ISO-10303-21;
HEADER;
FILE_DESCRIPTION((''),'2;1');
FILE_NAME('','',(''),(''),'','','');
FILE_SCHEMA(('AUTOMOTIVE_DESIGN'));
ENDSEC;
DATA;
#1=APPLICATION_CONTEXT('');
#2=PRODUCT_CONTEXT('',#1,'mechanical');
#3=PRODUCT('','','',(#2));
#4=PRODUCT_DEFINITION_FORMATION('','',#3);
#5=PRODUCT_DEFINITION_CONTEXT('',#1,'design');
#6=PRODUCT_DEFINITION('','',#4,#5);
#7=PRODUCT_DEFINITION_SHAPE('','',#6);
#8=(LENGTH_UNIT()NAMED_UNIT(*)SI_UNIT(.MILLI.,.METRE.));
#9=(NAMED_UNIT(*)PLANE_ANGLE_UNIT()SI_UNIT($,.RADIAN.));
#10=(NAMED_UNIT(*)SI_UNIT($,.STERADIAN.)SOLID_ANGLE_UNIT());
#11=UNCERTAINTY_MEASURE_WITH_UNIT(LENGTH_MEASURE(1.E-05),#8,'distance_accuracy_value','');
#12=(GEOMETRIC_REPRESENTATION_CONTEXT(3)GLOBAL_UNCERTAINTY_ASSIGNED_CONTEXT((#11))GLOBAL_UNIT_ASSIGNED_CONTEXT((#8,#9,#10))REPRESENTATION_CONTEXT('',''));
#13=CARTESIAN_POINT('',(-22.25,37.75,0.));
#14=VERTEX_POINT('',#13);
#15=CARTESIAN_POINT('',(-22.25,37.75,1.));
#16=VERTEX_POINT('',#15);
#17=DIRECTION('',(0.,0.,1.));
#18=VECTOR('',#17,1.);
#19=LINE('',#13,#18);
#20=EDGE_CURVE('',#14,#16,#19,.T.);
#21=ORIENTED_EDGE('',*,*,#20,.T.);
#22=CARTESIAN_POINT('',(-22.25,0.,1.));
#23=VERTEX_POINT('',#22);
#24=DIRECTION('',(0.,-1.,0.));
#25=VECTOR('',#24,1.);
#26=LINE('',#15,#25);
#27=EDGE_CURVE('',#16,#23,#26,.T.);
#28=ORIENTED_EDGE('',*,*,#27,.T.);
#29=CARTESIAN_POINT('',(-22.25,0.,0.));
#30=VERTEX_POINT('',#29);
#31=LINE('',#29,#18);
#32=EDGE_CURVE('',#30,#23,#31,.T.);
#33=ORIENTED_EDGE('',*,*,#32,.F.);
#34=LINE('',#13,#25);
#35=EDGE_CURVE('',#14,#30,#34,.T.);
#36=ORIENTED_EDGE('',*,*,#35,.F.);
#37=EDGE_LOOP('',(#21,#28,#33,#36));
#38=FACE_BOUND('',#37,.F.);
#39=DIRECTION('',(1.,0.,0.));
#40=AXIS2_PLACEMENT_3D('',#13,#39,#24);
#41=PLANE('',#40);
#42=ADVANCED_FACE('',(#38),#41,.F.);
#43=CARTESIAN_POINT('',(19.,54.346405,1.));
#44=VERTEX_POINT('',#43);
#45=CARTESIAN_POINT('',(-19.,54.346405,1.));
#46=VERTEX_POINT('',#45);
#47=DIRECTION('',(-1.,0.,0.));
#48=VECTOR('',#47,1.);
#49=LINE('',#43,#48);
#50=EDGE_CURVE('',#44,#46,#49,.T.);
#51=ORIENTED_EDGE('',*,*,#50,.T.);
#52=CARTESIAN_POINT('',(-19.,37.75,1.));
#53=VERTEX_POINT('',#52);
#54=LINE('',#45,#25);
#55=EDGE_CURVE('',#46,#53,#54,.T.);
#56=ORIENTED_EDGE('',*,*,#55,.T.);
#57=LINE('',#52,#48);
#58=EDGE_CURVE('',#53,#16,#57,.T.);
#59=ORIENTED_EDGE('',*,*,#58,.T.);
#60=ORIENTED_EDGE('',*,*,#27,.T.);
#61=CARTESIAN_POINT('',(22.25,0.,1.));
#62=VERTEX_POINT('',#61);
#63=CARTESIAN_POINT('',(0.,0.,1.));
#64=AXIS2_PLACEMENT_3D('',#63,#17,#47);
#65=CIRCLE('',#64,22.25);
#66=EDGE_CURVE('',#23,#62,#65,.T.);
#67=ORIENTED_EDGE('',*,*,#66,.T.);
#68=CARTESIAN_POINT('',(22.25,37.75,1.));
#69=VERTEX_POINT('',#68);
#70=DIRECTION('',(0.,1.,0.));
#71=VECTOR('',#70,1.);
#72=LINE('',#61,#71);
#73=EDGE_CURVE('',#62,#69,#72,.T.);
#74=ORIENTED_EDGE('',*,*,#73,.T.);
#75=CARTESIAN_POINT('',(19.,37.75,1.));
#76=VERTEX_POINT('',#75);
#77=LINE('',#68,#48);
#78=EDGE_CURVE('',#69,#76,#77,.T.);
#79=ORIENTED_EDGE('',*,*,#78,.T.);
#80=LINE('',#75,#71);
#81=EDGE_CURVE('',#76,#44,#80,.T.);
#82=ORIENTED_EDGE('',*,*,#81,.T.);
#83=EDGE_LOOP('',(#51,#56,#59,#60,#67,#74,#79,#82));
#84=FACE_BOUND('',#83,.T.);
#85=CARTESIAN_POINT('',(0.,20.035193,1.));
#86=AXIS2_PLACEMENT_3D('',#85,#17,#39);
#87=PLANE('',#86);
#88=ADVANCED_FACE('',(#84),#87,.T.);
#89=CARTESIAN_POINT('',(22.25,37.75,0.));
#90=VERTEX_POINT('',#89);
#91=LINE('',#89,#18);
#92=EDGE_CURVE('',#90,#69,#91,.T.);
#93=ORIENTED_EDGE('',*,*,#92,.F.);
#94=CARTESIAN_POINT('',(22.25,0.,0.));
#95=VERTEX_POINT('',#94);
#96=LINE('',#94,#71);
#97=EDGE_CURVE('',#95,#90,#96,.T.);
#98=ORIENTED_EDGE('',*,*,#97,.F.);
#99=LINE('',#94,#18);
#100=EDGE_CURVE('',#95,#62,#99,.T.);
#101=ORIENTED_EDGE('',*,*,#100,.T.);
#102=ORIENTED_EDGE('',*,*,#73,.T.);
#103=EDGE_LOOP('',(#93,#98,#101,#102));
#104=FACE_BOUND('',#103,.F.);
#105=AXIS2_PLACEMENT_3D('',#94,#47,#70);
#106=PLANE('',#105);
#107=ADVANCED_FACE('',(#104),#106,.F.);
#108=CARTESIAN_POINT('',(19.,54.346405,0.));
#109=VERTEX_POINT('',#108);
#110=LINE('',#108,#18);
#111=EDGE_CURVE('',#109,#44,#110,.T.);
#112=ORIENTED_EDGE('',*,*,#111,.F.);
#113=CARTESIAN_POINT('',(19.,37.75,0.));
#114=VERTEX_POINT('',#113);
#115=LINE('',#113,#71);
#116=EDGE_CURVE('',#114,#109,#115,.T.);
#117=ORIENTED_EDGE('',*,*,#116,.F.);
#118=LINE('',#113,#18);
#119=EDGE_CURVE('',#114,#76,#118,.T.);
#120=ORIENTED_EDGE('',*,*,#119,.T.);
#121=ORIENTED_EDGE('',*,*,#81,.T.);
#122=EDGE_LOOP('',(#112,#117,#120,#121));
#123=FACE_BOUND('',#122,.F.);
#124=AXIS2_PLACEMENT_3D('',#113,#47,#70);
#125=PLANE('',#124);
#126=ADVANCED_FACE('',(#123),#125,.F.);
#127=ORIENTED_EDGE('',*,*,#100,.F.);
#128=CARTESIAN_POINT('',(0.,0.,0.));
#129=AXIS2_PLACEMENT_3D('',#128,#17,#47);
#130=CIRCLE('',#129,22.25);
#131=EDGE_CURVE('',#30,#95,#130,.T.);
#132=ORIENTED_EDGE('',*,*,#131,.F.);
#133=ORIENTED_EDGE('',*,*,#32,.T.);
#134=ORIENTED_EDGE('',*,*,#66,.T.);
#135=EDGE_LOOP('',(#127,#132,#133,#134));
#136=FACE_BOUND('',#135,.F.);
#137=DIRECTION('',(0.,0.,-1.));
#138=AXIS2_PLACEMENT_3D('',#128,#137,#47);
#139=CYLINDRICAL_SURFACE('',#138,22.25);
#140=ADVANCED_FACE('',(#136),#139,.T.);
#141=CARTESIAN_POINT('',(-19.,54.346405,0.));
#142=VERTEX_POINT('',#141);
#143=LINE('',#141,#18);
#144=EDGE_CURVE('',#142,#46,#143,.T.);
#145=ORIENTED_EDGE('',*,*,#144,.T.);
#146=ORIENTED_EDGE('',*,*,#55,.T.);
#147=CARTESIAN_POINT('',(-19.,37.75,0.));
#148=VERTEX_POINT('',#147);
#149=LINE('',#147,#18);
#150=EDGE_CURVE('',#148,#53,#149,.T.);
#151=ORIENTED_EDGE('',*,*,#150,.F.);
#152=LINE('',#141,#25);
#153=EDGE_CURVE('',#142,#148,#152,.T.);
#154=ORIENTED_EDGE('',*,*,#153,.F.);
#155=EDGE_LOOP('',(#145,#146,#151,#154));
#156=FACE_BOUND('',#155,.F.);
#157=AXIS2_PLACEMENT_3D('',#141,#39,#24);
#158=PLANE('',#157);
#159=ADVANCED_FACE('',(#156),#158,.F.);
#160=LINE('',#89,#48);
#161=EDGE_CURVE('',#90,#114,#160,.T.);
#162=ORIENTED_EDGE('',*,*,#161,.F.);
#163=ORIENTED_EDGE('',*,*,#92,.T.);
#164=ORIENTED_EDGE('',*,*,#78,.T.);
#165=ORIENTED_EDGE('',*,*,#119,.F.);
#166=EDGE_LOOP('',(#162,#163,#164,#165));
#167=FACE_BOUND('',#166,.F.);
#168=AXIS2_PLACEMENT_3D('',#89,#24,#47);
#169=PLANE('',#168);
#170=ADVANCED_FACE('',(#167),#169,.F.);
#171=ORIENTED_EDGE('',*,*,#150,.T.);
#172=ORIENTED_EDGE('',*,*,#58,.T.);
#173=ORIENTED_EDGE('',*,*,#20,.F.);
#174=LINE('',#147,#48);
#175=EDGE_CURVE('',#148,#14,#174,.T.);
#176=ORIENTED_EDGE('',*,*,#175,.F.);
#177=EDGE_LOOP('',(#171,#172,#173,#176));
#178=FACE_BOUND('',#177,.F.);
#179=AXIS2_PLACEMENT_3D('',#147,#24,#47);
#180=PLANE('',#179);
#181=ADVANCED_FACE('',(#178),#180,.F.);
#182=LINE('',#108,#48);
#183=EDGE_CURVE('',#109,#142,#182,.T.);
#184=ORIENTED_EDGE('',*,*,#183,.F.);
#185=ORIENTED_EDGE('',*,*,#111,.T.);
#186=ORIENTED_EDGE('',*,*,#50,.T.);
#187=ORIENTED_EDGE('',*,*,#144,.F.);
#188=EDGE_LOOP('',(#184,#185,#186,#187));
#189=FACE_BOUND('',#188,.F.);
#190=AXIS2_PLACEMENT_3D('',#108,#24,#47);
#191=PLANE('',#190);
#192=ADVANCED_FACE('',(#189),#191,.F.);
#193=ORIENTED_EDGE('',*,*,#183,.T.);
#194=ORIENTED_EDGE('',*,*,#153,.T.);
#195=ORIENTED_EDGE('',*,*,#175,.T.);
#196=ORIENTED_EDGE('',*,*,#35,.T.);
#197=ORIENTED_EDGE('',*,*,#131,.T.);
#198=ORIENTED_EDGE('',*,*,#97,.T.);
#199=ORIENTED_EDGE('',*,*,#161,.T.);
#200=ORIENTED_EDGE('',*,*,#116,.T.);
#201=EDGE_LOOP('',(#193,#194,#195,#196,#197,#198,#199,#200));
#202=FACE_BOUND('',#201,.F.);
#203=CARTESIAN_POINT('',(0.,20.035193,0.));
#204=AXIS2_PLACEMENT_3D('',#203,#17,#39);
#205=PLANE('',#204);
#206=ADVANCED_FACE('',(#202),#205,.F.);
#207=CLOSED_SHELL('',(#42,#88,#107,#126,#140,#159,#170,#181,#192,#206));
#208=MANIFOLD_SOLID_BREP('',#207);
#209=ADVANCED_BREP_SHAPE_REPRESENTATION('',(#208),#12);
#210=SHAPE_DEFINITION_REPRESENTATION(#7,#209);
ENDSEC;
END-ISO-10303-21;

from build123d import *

# Parameters (mm, degrees)
F1_DEPTH = 1


# Not quite as in the source:
# - a feature names something its author has since deleted; it is built from what else it names


with BuildPart() as f1:
    # F0 (on Top) → F1 (new body)
    with BuildSketch(Plane.XY):
        with BuildLine():
            Line((-19, 37.75), (-22.25, 37.75))
            Line((-22.25, 37.75), (-22.25, 0))
            ThreePointArc((-22.25, 0), (0, -22.25), (22.25, 0))
            Line((22.25, 0), (22.25, 37.75))
            Line((22.25, 37.75), (19, 37.75))
            Line((19, 37.75), (19, 54.3464050591))
            Line((19, 54.3464050591), (-19, 54.3464050591))
            Line((-19, 54.3464050591), (-19, 42.75))
            Line((-19, 42.75), (-19, 37.75))
        make_face()
    extrude(amount=F1_DEPTH)


solid = f1.part
